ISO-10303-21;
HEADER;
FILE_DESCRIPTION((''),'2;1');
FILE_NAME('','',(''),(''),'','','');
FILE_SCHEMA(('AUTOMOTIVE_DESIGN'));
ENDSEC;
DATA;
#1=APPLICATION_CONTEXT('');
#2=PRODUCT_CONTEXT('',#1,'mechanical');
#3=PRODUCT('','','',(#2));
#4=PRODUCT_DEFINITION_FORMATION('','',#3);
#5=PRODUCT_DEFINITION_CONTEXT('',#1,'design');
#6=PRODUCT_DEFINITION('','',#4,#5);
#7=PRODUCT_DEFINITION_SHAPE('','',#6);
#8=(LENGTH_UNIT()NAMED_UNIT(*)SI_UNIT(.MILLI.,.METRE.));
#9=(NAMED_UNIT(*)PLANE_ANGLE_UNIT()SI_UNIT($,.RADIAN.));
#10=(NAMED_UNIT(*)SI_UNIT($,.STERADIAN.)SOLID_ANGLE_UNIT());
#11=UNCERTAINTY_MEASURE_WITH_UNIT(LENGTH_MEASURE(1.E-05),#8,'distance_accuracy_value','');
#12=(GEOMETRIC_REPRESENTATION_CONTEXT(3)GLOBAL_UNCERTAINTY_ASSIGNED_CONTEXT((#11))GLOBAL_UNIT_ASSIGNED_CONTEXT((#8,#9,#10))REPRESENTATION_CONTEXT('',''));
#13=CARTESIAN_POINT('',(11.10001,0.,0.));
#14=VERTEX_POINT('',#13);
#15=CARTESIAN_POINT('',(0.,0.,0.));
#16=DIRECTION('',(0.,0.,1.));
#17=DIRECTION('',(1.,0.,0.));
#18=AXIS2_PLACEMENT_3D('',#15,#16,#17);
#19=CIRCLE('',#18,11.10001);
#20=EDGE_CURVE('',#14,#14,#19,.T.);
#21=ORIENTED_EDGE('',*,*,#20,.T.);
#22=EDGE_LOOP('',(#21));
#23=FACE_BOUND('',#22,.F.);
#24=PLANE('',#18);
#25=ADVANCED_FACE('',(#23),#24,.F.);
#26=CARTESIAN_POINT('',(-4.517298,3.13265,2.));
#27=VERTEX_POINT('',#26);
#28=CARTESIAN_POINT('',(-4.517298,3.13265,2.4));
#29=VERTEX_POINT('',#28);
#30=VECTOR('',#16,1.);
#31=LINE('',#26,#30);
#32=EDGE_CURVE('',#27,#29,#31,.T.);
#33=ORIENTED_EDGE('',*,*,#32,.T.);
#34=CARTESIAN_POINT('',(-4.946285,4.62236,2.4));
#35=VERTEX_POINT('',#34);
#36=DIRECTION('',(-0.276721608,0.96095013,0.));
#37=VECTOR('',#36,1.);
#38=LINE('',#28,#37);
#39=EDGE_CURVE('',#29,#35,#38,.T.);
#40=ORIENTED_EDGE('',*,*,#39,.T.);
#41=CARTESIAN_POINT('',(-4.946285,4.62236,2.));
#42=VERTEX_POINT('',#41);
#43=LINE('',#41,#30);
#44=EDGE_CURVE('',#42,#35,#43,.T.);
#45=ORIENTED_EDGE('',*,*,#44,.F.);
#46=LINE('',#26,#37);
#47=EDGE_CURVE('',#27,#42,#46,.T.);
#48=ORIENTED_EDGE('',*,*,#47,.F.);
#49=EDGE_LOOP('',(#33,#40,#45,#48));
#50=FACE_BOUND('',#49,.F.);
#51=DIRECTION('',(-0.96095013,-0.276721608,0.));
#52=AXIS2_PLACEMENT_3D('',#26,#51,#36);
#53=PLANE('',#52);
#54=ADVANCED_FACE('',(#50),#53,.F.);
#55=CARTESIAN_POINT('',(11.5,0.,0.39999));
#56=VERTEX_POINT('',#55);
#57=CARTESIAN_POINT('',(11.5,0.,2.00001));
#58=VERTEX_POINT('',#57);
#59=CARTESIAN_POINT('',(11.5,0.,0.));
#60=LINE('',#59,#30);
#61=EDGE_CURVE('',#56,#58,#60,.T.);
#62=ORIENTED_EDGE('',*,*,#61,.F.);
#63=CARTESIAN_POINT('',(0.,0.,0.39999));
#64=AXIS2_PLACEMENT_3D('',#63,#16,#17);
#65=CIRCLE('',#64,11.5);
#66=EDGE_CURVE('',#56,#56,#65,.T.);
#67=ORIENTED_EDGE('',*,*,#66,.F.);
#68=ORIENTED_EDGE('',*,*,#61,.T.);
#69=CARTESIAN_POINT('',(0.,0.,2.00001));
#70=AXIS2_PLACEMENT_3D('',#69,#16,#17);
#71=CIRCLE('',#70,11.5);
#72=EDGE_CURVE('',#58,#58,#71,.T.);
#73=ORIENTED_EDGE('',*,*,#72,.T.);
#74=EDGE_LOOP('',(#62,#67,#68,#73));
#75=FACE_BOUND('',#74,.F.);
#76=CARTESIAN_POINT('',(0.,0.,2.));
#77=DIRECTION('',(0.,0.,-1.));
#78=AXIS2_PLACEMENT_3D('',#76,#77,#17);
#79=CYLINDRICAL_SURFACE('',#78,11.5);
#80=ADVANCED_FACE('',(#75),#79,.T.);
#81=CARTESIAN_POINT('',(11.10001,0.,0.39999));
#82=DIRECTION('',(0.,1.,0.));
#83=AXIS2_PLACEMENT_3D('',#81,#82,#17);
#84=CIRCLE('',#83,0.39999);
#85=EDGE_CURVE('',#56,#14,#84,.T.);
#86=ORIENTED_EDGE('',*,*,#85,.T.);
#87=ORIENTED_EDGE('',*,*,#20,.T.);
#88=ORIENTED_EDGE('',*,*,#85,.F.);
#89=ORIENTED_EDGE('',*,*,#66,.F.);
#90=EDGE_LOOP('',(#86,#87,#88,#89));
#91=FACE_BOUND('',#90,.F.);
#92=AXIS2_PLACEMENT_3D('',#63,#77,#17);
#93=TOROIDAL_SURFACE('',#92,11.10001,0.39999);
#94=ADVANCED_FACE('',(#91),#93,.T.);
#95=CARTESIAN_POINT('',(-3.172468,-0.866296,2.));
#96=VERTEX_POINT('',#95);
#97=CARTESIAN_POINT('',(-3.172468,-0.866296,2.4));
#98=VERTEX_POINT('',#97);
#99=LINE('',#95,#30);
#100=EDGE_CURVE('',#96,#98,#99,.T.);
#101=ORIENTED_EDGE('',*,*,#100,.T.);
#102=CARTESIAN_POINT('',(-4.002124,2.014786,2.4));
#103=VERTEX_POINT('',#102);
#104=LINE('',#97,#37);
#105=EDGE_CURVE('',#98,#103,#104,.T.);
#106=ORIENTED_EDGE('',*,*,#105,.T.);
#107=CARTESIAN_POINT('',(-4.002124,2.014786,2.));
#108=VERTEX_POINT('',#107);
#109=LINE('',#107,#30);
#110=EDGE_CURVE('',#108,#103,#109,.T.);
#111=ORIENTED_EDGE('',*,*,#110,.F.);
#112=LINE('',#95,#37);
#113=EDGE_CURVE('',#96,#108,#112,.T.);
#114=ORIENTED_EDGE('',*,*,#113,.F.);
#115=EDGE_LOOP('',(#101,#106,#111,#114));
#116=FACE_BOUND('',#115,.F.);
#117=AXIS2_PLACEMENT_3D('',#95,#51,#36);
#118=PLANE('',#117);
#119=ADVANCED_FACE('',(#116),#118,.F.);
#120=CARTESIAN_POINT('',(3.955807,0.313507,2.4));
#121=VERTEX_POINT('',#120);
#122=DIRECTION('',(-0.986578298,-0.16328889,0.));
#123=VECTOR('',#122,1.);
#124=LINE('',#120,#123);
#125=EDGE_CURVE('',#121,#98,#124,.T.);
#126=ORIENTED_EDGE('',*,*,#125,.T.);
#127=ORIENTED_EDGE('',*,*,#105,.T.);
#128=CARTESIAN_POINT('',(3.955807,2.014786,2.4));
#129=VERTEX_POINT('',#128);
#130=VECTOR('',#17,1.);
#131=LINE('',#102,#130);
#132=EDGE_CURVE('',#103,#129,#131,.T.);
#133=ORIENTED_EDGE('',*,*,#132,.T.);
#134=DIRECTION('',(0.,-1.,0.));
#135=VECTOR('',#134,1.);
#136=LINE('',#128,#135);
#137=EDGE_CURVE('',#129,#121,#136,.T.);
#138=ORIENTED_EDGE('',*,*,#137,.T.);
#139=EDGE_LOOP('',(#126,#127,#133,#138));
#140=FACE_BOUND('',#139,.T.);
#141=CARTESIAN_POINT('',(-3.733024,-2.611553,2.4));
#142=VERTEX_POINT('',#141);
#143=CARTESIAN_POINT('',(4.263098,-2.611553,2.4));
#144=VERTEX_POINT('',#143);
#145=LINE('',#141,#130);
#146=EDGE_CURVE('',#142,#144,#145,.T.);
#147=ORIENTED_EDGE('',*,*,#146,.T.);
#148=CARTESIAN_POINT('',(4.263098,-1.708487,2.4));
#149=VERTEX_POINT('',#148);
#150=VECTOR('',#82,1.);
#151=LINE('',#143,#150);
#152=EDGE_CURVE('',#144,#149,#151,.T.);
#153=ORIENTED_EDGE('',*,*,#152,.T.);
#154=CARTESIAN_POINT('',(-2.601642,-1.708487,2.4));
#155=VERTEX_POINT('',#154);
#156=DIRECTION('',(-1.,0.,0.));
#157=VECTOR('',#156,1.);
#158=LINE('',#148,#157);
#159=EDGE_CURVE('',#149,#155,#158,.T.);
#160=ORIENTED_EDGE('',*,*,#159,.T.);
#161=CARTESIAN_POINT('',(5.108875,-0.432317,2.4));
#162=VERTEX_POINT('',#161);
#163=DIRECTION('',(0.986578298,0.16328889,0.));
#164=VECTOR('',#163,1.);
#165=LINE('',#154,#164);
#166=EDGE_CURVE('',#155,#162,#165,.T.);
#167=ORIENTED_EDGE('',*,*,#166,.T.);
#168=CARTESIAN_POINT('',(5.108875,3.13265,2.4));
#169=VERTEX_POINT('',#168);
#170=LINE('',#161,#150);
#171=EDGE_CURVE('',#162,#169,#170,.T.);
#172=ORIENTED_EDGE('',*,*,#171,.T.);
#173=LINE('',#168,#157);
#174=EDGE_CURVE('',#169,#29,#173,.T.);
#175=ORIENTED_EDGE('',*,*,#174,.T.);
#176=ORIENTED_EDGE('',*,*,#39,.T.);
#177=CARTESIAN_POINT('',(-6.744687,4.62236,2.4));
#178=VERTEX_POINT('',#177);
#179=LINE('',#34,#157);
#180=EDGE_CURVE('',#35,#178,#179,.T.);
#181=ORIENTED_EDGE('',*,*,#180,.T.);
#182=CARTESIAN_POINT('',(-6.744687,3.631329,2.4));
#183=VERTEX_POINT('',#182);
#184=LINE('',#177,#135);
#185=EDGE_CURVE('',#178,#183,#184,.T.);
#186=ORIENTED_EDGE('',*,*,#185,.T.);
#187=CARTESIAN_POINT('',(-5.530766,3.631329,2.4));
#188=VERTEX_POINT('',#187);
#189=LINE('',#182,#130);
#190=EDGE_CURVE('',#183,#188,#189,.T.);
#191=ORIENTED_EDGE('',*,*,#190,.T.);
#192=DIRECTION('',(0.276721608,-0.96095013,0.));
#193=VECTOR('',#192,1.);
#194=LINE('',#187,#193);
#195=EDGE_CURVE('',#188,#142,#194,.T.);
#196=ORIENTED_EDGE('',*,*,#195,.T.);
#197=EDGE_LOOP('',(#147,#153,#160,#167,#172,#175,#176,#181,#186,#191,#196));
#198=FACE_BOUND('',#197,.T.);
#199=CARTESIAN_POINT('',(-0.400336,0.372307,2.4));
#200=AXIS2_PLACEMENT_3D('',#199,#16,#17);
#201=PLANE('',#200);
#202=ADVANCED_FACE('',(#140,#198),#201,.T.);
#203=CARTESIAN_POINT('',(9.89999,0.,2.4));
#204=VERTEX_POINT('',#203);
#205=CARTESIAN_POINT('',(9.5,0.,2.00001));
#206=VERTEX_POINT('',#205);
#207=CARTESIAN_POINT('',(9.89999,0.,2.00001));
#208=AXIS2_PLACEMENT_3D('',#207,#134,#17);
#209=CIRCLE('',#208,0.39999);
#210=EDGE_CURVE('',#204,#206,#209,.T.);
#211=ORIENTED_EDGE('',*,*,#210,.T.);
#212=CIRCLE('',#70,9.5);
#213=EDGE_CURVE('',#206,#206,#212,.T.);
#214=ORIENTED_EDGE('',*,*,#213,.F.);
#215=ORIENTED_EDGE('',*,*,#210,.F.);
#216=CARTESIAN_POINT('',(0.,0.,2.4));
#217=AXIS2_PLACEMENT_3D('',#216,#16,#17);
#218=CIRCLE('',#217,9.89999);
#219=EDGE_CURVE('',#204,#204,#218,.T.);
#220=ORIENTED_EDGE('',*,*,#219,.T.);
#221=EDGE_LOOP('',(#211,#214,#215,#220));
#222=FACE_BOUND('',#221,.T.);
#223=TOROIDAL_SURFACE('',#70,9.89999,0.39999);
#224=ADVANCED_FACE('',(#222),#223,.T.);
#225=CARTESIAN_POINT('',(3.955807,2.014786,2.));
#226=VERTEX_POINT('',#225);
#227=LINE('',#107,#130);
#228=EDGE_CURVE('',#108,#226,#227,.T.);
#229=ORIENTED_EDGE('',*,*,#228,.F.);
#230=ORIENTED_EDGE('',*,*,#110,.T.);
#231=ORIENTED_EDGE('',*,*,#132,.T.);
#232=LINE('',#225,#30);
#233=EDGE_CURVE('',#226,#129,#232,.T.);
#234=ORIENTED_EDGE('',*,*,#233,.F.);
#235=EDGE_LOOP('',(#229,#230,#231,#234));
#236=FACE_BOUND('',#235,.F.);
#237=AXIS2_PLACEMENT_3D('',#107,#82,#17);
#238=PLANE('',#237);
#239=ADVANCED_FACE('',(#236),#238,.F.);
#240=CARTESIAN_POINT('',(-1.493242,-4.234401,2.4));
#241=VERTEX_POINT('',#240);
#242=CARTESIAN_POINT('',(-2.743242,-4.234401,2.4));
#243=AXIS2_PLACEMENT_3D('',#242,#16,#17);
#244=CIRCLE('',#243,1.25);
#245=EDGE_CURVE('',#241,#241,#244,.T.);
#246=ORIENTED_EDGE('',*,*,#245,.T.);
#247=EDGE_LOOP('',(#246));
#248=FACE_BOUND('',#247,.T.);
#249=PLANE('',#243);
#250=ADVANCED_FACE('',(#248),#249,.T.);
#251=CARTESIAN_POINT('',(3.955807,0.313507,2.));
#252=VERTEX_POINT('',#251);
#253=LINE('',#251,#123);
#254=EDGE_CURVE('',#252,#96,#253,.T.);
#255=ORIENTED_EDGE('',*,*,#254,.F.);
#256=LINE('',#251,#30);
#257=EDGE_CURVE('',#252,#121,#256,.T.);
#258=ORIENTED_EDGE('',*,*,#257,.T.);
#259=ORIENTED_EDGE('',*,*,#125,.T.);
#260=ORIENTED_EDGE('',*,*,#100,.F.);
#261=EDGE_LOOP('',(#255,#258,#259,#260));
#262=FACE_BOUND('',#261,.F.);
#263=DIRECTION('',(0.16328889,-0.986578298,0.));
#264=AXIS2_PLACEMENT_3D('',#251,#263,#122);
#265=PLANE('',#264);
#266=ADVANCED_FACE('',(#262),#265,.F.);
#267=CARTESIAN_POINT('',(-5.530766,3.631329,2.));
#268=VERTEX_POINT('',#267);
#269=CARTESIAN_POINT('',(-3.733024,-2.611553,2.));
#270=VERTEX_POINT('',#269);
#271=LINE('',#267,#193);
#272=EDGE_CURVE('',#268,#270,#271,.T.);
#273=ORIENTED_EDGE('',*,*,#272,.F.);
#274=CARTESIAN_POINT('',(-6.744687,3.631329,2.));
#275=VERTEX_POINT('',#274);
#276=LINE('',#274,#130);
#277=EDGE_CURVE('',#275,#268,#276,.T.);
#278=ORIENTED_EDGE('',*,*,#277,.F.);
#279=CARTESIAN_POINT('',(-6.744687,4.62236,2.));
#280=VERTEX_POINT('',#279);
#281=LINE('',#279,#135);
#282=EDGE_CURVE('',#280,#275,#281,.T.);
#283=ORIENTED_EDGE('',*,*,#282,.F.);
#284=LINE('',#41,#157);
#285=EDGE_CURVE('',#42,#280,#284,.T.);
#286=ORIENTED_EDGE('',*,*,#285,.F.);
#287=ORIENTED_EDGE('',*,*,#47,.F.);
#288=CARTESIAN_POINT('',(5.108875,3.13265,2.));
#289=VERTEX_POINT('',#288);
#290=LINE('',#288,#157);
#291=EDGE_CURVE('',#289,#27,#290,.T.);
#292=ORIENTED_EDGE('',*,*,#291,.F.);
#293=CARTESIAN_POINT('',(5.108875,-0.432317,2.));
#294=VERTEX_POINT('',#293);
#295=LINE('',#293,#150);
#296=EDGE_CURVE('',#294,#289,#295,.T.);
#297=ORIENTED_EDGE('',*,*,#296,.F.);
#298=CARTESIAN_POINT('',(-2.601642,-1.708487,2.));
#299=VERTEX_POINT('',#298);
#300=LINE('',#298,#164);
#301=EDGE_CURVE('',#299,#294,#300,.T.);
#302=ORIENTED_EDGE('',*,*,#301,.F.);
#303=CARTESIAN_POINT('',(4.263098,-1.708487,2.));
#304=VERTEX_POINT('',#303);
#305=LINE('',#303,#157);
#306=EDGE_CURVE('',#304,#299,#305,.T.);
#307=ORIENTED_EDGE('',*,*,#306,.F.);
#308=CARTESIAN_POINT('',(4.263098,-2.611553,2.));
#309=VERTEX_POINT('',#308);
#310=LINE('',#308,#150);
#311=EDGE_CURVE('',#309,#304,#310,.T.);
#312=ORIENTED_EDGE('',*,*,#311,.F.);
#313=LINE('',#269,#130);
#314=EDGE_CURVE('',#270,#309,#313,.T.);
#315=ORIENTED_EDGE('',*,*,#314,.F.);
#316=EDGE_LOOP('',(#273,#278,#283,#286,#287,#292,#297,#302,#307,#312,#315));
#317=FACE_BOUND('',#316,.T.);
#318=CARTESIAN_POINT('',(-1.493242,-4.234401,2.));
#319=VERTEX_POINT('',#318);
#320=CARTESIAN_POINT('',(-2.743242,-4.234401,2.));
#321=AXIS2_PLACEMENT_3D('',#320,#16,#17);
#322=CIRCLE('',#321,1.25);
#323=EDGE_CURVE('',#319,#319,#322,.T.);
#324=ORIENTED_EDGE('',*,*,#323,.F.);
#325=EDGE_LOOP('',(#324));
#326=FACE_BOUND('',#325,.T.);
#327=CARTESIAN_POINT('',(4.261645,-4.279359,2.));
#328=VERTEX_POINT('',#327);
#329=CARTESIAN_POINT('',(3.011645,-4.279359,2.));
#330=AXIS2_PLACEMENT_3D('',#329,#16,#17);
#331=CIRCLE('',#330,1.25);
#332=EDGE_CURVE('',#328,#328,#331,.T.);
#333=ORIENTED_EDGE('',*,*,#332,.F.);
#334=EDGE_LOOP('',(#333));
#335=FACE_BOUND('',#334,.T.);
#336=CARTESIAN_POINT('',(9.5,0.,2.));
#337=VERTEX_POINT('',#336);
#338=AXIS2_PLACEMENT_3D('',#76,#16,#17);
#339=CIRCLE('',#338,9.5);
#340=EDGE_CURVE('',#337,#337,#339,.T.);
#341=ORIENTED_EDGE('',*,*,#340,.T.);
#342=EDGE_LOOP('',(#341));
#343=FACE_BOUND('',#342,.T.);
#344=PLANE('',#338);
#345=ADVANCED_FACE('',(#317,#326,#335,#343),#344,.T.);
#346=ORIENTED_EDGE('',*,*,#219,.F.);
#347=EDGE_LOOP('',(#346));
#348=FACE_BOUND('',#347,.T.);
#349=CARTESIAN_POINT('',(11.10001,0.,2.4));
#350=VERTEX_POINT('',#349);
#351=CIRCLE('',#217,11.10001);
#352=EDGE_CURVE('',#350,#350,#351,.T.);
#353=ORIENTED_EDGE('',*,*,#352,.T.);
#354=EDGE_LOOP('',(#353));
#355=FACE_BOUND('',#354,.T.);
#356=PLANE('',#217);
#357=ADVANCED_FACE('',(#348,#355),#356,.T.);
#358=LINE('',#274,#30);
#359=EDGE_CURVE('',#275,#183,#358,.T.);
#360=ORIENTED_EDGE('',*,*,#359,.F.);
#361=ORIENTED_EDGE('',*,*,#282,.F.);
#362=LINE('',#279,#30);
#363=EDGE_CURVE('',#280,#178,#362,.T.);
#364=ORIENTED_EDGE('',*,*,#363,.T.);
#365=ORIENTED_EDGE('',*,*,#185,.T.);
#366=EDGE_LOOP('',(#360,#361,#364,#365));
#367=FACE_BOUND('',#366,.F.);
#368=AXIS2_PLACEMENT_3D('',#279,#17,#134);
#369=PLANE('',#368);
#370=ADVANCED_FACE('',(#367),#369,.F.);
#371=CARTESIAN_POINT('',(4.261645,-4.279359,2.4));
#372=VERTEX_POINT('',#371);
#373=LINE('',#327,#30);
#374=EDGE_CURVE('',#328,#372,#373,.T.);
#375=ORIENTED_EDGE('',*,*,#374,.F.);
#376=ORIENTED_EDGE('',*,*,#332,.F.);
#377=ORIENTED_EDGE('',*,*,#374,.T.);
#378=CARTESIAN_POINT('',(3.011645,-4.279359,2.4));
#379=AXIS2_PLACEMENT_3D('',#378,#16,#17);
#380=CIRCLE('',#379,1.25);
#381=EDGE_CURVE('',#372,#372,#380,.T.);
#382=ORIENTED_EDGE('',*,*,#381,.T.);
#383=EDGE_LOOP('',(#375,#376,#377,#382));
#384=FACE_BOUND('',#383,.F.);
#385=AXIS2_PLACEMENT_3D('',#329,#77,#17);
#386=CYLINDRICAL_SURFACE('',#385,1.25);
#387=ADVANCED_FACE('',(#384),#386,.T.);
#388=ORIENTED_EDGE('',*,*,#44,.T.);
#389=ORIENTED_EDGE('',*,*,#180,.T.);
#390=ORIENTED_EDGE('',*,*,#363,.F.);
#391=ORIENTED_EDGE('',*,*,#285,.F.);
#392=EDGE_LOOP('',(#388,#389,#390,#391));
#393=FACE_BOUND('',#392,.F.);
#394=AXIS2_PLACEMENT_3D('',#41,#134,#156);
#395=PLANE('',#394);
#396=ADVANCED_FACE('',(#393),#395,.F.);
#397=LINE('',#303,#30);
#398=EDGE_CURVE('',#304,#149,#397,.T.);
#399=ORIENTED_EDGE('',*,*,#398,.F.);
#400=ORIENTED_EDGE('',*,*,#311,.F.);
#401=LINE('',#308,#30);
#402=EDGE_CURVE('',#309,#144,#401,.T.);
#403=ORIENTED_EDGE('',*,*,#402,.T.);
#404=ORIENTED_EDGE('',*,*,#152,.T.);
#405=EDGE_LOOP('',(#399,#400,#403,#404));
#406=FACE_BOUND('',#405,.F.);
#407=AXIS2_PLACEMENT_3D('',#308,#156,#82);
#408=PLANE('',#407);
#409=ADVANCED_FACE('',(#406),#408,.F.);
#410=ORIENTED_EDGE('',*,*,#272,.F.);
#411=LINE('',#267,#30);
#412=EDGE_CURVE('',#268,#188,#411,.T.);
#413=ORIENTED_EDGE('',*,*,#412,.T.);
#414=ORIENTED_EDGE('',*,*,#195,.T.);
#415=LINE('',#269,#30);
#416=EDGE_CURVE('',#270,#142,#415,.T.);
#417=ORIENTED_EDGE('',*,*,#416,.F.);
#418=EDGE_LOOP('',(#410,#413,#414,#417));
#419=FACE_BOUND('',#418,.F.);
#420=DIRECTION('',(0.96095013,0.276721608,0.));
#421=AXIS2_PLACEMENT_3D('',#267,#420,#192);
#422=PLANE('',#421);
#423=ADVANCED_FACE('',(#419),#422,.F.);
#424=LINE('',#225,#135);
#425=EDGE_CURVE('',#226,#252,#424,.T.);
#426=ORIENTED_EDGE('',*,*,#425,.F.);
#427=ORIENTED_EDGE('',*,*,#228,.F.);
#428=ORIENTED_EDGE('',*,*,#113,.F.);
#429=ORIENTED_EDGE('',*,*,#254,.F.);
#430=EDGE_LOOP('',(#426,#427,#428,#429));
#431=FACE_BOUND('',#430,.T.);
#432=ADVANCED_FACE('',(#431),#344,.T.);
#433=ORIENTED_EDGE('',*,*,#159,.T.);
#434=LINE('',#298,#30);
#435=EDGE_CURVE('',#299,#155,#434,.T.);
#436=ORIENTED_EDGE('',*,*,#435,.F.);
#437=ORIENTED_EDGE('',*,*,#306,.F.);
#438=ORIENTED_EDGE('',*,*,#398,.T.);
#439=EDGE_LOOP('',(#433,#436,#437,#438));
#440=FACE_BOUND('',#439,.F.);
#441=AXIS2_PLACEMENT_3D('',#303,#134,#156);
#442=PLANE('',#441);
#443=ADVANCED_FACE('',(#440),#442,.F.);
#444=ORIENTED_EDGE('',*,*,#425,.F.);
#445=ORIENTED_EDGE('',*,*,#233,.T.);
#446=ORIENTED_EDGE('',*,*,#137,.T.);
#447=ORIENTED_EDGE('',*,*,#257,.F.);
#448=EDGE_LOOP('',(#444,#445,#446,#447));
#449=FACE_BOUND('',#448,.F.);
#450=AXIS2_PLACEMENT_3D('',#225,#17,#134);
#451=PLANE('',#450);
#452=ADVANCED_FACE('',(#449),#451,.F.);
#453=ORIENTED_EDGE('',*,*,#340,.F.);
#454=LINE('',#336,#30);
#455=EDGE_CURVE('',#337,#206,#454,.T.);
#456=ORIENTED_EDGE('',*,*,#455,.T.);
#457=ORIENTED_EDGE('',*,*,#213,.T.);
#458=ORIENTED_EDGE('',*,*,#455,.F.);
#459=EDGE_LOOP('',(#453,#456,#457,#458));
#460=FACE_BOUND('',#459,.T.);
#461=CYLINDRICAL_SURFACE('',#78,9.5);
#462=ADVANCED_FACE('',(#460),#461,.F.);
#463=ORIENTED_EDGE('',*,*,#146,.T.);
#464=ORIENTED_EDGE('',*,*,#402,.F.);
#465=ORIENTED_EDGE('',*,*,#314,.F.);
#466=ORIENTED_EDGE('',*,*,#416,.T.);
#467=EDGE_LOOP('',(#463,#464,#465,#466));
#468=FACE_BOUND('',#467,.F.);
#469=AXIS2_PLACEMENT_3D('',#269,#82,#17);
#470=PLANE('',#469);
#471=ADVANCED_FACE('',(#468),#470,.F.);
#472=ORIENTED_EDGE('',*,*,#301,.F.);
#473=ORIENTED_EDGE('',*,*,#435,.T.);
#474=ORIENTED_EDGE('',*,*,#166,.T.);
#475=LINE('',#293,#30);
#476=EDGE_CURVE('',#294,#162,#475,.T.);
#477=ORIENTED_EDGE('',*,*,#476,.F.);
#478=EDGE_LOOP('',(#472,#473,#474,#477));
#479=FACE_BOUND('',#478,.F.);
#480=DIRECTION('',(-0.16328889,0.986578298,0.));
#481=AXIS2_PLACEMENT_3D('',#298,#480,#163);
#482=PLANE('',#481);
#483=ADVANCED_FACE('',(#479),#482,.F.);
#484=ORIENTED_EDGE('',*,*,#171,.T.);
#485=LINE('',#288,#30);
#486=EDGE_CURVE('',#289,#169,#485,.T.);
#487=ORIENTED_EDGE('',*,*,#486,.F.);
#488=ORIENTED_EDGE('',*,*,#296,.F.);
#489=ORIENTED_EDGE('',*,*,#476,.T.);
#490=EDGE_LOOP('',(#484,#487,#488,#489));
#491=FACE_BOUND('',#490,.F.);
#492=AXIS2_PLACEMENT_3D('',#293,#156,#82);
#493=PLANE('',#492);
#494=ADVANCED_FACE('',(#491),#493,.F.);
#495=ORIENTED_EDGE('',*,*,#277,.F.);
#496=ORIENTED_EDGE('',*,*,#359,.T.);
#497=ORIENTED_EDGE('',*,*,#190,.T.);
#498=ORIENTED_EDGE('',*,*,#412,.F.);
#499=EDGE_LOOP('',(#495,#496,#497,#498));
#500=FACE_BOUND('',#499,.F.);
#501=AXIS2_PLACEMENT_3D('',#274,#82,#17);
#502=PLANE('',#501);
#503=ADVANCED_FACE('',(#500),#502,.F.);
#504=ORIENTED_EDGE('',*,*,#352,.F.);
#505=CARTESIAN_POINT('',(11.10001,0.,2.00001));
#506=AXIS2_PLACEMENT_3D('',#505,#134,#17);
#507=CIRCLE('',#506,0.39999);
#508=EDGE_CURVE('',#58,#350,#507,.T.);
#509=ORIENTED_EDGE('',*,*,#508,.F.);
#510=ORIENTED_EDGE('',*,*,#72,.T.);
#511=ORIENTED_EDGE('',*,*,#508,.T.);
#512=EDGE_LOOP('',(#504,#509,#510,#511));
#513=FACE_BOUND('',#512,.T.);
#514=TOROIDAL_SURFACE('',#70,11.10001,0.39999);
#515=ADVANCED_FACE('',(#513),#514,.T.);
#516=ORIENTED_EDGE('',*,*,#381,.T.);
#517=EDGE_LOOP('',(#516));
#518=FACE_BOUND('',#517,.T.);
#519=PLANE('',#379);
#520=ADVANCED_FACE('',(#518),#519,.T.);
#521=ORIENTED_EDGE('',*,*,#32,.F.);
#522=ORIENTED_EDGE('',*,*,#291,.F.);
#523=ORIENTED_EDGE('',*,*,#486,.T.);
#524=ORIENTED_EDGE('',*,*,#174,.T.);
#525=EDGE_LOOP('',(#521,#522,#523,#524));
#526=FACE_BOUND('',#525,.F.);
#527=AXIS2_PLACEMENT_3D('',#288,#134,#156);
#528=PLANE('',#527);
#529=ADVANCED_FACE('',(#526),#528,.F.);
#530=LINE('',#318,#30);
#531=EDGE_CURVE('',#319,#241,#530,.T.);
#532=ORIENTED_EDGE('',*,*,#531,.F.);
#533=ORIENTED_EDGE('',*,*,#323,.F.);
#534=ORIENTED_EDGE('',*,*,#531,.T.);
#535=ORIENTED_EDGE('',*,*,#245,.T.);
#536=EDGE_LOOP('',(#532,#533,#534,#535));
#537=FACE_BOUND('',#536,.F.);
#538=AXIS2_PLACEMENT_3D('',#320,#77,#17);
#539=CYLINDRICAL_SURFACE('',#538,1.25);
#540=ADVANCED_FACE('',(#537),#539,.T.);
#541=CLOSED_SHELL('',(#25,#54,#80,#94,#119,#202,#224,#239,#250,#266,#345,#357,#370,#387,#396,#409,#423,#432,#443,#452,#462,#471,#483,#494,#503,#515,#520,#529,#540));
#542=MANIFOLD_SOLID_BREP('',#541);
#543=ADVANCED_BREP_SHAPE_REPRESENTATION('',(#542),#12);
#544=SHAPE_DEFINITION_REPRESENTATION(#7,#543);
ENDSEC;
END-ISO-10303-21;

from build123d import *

# Parameters (mm, degrees)
F0_R     = 11.5
F1_DEPTH = 2
F2_R     = 11.5
F2_R_2   = 9.5
F3_DEPTH = 0.4
F4_R     = 1.25
F5_DEPTH = 0.4
F6_R     = 0.39999


# Not quite as in the source:
# - a fillet or chamfer is up to 0.001 mm smaller than in the source, because OpenCascade refuses the exact size


with BuildPart() as f1:
    # F0 (on Top) → F1 (new body)
    with BuildSketch(Plane.XY):
        Circle(F0_R)
    extrude(amount=F1_DEPTH)

    # F2 (on face) → F3 (join)
    with BuildSketch(Plane.XY.offset(2)):
        Circle(F2_R)
        Circle(F2_R_2, mode=Mode.SUBTRACT)
    extrude(amount=F3_DEPTH)

    # F4 (on face) → F5 (join)
    with BuildSketch(Plane.XY.offset(2)):
        Polygon((-4.9462847407, 4.6223603384), (-6.7446869929, 4.6223603384), (-6.7446869929, 3.631329312), (-5.5307656769, 3.631329312), (-3.7330235863, -2.611553217), (4.2630984261, -2.611553217), (4.2630984261, -1.7084874132), (-2.6016419292, -1.7084874132), (5.1088749777, -0.4323172916), (5.1088749777, 3.1326496529), (-4.5172977159, 3.1326496529), align=None)
        Polygon((-3.1724679652, -0.8662961763), (-4.0021237171, 2.0147863915), (3.9558067254, 2.0147863915), (3.9558067254, 0.3135068497), align=None, mode=Mode.SUBTRACT)
        with Locations((-2.7432420498, -4.2344009733)):
            Circle(F4_R)
        with Locations((3.0116447943, -4.2793590558)):
            Circle(F4_R)
    extrude(amount=F5_DEPTH)

    # F6 (radius 0.4 in the source; OpenCascade refuses exactly that, so slightly less here)
    f6_edges = [f1.edges().sort_by_distance(p)[0] for p in [
        (-11.5, 0, 2.4),
        (-9.5, 0, 2.4),
        (-11.5, 0, 0),
    ]]
    fillet(f6_edges, radius=F6_R)


solid = f1.part
